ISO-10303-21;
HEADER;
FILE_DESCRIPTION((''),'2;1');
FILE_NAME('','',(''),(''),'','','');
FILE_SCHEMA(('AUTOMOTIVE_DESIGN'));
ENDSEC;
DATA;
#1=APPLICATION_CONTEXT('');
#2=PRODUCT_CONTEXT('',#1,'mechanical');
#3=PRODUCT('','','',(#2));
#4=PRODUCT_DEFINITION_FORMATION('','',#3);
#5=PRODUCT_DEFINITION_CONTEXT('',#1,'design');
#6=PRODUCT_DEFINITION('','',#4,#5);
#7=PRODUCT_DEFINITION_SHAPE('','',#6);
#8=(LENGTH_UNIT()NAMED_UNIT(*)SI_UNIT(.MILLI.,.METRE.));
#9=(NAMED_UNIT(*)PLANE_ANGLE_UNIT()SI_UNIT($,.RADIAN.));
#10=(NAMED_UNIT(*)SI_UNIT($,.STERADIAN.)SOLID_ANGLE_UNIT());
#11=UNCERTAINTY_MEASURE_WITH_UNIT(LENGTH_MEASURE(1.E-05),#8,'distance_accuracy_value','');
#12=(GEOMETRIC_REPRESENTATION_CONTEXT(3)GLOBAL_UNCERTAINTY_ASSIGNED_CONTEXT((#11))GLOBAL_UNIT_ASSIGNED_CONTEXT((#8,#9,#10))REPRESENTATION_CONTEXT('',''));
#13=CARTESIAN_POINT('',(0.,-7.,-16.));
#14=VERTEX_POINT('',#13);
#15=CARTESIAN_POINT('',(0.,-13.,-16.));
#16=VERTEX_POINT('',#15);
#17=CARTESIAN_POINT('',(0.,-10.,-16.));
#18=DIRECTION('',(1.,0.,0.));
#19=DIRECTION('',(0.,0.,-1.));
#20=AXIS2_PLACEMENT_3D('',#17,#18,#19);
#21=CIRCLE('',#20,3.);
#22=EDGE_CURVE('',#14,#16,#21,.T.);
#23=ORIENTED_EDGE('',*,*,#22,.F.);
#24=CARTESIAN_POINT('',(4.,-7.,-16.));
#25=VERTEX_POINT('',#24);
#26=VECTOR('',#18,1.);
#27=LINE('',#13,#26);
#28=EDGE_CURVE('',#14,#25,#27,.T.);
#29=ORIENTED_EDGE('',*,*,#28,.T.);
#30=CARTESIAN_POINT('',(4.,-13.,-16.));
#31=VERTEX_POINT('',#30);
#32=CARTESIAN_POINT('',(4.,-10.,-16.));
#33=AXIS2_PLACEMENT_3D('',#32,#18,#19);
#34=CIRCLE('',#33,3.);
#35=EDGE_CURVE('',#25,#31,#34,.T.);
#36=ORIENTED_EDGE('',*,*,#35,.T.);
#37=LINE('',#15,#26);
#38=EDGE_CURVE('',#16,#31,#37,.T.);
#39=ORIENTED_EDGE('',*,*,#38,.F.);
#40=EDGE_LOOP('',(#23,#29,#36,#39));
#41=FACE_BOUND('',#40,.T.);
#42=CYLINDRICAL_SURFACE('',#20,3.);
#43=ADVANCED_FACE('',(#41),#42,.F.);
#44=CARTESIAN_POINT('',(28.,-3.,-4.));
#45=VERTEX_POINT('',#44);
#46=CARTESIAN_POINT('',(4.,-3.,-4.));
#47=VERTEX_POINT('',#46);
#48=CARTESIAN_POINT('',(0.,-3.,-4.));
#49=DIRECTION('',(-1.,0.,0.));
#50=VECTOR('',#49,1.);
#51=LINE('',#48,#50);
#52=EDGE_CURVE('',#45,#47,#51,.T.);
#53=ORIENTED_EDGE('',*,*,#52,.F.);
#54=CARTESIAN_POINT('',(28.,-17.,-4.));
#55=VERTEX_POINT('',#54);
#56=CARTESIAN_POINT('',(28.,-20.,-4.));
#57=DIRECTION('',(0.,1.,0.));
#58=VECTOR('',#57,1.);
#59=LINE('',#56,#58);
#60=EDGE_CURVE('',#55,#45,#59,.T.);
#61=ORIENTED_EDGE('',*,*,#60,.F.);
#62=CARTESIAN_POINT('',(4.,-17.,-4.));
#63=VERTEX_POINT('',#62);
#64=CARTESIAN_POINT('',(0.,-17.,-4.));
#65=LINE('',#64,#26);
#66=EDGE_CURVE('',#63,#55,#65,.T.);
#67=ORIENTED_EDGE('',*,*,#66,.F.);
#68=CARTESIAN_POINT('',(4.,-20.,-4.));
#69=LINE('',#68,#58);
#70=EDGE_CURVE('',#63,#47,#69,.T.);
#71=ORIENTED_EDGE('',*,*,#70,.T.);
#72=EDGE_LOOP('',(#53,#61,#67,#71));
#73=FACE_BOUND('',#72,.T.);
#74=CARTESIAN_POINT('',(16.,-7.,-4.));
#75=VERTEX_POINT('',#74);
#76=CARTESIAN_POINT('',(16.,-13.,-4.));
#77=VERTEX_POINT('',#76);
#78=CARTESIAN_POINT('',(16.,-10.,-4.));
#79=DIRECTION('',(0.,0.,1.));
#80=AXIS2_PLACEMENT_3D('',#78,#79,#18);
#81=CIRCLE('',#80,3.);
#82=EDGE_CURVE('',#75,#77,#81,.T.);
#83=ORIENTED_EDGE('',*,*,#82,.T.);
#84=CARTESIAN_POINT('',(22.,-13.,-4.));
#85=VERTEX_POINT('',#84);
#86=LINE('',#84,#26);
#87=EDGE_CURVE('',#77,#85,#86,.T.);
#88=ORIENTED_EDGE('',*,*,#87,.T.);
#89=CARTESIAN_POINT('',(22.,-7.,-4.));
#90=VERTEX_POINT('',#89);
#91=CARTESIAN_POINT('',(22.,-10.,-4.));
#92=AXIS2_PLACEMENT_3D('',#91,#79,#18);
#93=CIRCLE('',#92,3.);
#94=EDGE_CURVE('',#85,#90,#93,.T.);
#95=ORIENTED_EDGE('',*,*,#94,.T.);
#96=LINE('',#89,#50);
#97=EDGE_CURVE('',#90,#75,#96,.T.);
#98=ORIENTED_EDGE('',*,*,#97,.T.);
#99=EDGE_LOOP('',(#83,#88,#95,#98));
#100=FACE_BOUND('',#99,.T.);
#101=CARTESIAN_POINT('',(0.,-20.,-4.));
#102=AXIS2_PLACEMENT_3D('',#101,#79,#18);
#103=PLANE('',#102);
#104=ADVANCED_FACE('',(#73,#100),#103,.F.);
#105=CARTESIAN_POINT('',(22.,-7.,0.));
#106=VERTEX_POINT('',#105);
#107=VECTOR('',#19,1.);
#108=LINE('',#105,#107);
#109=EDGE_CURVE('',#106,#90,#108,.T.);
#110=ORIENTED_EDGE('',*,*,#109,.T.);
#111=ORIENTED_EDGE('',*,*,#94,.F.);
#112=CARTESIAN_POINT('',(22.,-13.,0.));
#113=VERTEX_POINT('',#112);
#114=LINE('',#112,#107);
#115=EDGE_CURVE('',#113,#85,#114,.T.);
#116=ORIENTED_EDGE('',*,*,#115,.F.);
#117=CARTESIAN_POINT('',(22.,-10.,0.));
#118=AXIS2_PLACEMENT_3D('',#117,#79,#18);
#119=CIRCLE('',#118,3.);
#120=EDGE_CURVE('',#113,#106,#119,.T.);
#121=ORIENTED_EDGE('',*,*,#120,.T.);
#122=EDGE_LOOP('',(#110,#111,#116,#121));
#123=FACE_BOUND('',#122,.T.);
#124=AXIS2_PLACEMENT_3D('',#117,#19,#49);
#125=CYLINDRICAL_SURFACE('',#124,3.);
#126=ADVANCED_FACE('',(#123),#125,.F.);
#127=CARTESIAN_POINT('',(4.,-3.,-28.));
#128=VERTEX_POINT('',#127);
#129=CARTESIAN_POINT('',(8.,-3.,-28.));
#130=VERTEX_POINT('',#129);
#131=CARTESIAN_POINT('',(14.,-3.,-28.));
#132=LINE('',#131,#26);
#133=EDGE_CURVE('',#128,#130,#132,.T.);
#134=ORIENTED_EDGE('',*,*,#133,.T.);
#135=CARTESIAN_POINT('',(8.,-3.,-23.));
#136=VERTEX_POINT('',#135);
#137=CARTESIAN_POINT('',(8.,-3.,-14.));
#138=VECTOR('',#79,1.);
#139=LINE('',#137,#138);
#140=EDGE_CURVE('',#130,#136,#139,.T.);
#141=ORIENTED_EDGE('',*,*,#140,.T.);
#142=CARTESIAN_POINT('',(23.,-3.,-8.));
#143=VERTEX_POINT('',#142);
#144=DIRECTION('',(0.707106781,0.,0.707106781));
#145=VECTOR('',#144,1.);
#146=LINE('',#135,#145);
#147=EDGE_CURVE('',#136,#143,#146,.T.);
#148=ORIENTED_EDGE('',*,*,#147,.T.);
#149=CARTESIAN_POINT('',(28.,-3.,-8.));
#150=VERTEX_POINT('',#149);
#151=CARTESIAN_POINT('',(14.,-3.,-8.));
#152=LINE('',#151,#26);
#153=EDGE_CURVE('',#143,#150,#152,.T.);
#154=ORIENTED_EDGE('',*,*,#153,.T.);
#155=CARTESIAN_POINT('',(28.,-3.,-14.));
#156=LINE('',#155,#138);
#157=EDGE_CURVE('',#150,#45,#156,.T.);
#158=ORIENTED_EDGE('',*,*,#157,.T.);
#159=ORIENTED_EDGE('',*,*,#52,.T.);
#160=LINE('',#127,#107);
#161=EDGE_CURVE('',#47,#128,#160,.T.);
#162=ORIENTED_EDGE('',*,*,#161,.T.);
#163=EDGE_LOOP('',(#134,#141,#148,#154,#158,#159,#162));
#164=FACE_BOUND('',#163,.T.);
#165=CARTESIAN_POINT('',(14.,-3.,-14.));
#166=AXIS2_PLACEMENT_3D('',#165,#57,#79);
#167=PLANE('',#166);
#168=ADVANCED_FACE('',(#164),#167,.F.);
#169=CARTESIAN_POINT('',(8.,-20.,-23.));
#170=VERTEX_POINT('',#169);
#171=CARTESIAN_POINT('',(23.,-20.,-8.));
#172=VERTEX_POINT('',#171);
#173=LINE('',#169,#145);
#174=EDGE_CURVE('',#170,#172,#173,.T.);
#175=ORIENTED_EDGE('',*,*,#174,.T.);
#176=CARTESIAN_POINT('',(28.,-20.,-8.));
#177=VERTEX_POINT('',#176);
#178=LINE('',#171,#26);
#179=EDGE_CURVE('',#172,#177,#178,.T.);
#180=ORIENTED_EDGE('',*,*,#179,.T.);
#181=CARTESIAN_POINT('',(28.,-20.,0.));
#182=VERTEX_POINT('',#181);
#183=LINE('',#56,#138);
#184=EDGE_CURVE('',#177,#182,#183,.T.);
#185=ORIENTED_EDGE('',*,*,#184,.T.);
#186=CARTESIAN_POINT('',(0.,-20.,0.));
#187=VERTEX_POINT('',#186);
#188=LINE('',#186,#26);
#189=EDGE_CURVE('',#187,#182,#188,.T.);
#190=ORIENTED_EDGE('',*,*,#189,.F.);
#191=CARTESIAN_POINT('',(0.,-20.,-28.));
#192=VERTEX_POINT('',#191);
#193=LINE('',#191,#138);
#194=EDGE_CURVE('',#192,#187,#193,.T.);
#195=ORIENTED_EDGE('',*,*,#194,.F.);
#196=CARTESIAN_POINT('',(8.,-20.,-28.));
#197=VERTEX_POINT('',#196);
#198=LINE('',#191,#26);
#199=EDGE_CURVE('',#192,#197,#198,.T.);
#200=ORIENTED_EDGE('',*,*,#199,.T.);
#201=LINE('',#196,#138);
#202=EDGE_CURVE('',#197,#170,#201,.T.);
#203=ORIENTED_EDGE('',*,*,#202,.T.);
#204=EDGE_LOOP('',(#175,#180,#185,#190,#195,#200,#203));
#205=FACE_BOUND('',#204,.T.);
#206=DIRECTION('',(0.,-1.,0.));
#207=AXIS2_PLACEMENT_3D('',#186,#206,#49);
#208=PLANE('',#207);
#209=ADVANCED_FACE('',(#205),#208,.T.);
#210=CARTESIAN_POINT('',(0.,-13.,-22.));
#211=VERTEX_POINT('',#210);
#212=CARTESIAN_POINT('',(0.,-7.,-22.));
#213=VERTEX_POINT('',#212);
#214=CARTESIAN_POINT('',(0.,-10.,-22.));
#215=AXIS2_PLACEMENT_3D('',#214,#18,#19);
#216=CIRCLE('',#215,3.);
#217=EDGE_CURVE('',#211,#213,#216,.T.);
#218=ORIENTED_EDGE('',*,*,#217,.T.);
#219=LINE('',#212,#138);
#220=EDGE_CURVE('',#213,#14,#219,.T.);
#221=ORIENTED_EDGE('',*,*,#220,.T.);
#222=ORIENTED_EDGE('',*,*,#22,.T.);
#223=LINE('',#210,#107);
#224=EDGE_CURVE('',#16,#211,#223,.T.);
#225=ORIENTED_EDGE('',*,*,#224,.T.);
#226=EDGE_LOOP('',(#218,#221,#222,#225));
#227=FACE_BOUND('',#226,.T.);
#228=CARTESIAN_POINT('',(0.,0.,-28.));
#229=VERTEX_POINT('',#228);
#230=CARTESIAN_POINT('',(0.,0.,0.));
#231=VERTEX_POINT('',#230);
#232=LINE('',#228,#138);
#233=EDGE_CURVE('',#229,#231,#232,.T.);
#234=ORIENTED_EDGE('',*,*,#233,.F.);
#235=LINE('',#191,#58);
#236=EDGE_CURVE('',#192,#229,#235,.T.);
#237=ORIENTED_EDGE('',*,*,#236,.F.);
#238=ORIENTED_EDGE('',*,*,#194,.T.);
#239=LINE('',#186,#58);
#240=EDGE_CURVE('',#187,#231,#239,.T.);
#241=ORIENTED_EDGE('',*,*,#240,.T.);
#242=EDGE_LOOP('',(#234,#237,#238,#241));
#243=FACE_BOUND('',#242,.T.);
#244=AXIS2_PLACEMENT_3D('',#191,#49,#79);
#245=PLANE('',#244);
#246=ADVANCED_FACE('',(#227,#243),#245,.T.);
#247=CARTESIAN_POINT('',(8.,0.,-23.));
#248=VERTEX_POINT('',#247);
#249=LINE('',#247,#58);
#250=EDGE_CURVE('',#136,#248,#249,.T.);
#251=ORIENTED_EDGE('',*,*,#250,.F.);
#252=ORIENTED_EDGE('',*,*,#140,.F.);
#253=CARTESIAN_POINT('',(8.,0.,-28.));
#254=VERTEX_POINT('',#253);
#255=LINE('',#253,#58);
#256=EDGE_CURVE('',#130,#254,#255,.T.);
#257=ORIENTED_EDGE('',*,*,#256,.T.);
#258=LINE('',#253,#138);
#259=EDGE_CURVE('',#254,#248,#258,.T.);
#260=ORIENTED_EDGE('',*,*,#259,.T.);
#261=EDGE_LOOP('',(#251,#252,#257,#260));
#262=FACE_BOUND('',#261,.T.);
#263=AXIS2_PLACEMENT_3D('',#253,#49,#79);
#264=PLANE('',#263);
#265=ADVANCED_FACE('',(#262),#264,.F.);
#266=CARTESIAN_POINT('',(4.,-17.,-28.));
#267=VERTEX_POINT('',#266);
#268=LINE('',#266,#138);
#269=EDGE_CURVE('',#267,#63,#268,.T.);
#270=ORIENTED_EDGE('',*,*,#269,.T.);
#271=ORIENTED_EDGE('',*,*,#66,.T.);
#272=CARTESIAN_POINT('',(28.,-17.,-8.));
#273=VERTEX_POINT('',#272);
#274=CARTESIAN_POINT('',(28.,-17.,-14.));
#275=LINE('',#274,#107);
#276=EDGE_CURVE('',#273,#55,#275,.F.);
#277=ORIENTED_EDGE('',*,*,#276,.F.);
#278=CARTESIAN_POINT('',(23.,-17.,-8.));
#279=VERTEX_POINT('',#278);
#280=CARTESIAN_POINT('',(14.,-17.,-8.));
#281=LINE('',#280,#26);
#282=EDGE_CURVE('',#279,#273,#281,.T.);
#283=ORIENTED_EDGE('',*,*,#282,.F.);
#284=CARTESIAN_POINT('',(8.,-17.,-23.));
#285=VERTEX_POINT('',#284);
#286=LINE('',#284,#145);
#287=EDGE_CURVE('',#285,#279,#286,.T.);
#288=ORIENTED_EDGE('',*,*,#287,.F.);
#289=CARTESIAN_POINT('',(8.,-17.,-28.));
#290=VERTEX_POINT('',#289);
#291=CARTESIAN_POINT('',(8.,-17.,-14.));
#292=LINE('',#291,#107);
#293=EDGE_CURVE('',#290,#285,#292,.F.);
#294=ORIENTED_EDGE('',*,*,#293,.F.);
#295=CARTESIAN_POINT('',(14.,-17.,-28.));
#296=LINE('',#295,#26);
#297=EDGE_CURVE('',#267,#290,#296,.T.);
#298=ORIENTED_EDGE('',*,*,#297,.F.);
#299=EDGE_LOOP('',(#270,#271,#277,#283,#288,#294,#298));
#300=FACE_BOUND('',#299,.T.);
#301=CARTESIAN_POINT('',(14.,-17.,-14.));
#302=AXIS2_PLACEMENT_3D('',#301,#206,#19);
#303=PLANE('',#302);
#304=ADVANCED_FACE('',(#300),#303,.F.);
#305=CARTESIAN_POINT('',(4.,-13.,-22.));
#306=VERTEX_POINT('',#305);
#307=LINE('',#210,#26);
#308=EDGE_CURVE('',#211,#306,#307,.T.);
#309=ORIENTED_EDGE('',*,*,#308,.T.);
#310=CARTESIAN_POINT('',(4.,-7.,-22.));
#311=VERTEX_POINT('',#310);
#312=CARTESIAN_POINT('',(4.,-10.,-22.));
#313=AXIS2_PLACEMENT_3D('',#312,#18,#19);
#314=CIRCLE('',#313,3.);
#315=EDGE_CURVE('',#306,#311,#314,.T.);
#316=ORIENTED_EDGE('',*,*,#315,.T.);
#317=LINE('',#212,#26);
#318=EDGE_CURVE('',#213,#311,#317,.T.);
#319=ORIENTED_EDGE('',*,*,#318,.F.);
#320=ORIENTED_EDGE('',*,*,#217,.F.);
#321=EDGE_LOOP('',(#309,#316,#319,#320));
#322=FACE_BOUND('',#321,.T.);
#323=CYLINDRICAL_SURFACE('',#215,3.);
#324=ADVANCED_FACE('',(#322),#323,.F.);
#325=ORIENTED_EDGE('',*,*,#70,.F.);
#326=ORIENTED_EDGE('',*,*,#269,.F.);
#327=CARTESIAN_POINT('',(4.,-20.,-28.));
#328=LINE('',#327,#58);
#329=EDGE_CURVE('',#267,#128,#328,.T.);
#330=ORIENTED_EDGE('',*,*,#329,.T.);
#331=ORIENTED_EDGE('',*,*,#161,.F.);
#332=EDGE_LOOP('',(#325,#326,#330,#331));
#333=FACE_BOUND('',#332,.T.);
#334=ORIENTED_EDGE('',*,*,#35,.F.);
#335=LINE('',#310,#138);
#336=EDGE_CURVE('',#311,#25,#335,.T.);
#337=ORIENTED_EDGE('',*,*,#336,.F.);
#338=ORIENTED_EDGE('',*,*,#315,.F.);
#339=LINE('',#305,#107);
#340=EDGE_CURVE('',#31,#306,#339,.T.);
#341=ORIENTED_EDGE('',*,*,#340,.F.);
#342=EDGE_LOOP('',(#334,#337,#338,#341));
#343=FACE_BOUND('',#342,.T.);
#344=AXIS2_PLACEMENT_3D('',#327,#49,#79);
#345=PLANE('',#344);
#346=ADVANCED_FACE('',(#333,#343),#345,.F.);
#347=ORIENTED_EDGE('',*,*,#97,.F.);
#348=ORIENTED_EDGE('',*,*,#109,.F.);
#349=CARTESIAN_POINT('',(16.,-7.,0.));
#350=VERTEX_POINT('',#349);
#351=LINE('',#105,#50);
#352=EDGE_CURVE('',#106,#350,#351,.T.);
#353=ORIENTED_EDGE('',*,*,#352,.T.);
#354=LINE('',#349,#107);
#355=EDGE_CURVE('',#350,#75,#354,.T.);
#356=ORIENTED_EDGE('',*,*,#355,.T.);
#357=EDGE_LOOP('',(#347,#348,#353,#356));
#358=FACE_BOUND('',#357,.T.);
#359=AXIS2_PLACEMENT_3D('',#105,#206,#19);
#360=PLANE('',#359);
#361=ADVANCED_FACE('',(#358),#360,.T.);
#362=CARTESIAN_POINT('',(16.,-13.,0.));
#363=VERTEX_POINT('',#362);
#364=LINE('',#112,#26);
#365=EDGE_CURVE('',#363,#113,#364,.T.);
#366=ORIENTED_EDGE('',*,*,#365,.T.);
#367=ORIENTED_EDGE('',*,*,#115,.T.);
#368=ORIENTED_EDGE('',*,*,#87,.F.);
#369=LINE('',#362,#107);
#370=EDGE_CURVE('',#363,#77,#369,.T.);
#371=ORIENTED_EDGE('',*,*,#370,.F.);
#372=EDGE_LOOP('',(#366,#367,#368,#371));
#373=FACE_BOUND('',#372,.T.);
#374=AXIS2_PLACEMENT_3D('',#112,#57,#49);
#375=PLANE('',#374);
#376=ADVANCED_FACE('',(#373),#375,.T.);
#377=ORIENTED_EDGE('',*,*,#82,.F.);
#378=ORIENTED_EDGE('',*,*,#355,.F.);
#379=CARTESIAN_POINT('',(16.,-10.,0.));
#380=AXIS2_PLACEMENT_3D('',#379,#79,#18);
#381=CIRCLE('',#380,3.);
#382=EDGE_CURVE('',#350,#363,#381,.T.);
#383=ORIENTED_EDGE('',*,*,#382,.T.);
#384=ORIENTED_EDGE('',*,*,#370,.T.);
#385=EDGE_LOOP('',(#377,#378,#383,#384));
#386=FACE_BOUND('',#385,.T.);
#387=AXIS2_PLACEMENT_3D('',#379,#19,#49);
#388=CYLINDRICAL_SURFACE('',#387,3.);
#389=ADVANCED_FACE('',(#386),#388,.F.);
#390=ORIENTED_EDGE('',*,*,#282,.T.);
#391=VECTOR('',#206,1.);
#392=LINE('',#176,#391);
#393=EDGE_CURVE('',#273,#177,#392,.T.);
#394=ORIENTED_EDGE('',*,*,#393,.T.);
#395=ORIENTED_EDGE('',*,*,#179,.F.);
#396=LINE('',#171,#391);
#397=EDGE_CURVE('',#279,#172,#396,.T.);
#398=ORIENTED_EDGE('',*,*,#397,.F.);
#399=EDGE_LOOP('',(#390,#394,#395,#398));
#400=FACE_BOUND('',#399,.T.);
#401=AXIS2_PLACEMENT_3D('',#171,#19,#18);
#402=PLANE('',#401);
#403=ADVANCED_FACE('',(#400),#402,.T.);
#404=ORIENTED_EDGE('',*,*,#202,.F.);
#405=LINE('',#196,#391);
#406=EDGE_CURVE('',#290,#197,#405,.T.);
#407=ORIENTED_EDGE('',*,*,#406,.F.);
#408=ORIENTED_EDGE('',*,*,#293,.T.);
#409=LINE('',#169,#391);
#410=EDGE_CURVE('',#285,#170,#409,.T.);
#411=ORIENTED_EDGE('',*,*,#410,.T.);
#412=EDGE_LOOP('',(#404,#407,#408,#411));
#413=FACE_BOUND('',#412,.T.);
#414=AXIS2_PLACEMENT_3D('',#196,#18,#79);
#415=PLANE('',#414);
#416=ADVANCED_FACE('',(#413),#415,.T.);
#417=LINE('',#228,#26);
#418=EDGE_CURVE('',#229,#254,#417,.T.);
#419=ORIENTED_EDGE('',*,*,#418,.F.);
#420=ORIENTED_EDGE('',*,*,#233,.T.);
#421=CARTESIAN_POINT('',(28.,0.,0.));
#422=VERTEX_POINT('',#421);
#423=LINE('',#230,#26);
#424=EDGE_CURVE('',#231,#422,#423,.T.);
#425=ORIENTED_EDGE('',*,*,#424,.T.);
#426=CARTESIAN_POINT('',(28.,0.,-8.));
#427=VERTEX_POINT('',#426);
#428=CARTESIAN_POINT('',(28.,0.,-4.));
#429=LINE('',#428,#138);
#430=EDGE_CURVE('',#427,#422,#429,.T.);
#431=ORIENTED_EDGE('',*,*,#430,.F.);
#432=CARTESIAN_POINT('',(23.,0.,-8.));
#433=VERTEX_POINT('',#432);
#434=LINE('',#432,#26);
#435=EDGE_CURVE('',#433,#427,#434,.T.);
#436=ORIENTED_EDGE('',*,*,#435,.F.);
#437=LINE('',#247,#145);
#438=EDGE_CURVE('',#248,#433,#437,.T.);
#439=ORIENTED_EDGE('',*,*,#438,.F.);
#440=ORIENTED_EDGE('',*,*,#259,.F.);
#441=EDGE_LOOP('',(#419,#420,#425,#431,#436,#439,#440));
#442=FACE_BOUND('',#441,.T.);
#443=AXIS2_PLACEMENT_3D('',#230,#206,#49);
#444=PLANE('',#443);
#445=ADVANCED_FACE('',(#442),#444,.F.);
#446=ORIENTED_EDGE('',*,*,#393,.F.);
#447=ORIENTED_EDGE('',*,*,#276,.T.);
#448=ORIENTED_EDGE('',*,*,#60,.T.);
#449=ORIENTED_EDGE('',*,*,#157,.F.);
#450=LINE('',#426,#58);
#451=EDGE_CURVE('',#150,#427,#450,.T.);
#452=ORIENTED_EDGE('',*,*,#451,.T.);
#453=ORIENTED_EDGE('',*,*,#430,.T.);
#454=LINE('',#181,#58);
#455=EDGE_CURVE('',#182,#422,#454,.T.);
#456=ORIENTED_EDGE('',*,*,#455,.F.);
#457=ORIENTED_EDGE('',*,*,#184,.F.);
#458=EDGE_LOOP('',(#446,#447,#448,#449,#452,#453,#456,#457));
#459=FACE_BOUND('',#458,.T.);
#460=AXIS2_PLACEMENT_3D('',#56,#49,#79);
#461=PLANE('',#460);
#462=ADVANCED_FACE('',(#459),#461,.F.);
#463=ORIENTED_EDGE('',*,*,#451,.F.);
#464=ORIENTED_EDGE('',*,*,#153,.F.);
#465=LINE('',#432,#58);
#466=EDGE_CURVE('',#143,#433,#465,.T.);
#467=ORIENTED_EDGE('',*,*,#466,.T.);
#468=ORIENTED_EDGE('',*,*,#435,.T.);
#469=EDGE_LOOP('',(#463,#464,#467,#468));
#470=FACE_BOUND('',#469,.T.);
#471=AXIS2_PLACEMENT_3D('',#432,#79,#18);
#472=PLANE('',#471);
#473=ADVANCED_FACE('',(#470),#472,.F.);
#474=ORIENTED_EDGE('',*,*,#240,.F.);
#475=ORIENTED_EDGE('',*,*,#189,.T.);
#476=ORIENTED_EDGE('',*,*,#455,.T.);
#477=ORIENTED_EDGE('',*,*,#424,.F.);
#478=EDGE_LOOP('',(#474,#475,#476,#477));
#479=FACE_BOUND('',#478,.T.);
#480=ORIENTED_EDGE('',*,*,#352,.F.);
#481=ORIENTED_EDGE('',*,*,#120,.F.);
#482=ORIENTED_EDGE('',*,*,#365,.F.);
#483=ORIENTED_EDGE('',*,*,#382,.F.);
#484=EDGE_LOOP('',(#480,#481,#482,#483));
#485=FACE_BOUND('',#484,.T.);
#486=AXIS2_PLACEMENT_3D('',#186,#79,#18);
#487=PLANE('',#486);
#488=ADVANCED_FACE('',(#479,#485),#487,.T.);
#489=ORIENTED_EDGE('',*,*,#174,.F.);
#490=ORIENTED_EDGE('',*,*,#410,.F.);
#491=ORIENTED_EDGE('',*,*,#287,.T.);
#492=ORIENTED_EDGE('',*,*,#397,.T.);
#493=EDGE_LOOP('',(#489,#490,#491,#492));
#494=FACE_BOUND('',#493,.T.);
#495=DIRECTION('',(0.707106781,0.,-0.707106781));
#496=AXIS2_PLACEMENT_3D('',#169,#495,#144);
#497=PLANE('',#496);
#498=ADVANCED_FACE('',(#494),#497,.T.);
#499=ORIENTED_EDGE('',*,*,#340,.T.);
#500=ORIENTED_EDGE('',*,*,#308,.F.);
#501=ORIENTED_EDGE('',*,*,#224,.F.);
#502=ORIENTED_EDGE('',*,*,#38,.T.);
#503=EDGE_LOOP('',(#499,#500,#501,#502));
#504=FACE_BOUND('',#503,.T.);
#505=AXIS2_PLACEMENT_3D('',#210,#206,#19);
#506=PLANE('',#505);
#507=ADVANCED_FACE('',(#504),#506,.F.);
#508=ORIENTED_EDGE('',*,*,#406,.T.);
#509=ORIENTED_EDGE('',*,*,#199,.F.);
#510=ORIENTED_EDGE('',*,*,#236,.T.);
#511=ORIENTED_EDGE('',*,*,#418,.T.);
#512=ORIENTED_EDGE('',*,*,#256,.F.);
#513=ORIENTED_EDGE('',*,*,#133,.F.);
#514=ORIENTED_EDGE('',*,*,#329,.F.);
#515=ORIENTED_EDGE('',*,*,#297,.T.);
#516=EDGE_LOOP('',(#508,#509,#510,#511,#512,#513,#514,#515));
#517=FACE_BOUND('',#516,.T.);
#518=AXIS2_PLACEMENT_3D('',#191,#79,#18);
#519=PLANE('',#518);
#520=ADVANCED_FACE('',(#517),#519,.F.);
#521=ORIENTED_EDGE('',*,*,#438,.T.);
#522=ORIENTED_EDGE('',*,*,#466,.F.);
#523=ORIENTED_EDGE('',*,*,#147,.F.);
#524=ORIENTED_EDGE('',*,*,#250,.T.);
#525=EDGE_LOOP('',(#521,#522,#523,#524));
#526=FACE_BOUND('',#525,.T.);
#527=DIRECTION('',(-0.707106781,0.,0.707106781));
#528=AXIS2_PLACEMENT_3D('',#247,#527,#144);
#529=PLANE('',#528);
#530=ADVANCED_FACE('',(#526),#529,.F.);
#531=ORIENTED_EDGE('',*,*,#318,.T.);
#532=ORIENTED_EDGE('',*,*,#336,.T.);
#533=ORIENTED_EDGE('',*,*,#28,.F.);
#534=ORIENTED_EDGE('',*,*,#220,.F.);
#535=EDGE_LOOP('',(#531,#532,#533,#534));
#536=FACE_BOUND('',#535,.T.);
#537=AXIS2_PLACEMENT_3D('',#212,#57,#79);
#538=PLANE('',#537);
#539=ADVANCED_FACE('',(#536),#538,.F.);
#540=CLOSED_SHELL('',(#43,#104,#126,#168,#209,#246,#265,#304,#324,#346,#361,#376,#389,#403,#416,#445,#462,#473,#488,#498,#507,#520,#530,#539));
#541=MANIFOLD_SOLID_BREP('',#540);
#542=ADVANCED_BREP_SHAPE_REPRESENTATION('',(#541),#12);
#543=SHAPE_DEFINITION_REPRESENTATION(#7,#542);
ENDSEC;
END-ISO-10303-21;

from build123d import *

# Parameters (mm, degrees)
EXTRUDE_1_DEPTH     = 20
RIB_START           = -3
RIB_1_DEPTH         = 3
CUT_EXTRUDE_1_DEPTH = 42.952353927


# Read off the part's stored shape, not the designer's step: 筋1
with BuildPart() as part:
    # 草图1 → 拉伸-薄壁1 (new body)
    with BuildSketch(Plane(origin=(0, 0, 0), x_dir=(1, 0, 0), z_dir=(0, 1, 0))):
        Polygon((0, 28), (0, 0), (28, 0), (28, 4), (4, 4), (4, 28), align=None)
    extrude(amount=-EXTRUDE_1_DEPTH)

    # 筋1 outline → 筋1 (add)
    with BuildSketch(Plane(origin=(0, 0, 0), x_dir=(1, 0, 0), z_dir=(0, 1, 0)).offset(RIB_START)):
        Polygon((8, 28), (4, 28), (4, 4), (28, 4), (28, 8), (23, 8), (8, 23), align=None)
    rib_1 = extrude(amount=RIB_1_DEPTH)

    # 镜向1: 筋1 across plane
    add(rib_1.mirror(Plane(origin=(0, -10, 0), x_dir=(0, 0, 1), z_dir=(0, -1, 0))))

    # 草图3 → 切除-拉伸1 (cut, through all)
    with BuildSketch(Plane(origin=(4, 0, 0), x_dir=(0, 0, -1), z_dir=(1, 0, 0))):
        with BuildLine():
            Line((22, -13), (16, -13))
            ThreePointArc((16, -13), (13, -10), (16, -7))
            Line((16, -7), (22, -7))
            ThreePointArc((22, -7), (25, -10), (22, -13))
        make_face()
    cut_extrude_1 = extrude(amount=-CUT_EXTRUDE_1_DEPTH, mode=Mode.SUBTRACT)

    # 镜向2: 切除-拉伸1 across plane
    add(cut_extrude_1.mirror(Plane(origin=(0, 0, 0), x_dir=(-0.7071067811865478, 0, 0.7071067811865472), z_dir=(0.7071067811865475, 0, 0.7071067811865477))), mode=Mode.SUBTRACT)


solid = part.part
